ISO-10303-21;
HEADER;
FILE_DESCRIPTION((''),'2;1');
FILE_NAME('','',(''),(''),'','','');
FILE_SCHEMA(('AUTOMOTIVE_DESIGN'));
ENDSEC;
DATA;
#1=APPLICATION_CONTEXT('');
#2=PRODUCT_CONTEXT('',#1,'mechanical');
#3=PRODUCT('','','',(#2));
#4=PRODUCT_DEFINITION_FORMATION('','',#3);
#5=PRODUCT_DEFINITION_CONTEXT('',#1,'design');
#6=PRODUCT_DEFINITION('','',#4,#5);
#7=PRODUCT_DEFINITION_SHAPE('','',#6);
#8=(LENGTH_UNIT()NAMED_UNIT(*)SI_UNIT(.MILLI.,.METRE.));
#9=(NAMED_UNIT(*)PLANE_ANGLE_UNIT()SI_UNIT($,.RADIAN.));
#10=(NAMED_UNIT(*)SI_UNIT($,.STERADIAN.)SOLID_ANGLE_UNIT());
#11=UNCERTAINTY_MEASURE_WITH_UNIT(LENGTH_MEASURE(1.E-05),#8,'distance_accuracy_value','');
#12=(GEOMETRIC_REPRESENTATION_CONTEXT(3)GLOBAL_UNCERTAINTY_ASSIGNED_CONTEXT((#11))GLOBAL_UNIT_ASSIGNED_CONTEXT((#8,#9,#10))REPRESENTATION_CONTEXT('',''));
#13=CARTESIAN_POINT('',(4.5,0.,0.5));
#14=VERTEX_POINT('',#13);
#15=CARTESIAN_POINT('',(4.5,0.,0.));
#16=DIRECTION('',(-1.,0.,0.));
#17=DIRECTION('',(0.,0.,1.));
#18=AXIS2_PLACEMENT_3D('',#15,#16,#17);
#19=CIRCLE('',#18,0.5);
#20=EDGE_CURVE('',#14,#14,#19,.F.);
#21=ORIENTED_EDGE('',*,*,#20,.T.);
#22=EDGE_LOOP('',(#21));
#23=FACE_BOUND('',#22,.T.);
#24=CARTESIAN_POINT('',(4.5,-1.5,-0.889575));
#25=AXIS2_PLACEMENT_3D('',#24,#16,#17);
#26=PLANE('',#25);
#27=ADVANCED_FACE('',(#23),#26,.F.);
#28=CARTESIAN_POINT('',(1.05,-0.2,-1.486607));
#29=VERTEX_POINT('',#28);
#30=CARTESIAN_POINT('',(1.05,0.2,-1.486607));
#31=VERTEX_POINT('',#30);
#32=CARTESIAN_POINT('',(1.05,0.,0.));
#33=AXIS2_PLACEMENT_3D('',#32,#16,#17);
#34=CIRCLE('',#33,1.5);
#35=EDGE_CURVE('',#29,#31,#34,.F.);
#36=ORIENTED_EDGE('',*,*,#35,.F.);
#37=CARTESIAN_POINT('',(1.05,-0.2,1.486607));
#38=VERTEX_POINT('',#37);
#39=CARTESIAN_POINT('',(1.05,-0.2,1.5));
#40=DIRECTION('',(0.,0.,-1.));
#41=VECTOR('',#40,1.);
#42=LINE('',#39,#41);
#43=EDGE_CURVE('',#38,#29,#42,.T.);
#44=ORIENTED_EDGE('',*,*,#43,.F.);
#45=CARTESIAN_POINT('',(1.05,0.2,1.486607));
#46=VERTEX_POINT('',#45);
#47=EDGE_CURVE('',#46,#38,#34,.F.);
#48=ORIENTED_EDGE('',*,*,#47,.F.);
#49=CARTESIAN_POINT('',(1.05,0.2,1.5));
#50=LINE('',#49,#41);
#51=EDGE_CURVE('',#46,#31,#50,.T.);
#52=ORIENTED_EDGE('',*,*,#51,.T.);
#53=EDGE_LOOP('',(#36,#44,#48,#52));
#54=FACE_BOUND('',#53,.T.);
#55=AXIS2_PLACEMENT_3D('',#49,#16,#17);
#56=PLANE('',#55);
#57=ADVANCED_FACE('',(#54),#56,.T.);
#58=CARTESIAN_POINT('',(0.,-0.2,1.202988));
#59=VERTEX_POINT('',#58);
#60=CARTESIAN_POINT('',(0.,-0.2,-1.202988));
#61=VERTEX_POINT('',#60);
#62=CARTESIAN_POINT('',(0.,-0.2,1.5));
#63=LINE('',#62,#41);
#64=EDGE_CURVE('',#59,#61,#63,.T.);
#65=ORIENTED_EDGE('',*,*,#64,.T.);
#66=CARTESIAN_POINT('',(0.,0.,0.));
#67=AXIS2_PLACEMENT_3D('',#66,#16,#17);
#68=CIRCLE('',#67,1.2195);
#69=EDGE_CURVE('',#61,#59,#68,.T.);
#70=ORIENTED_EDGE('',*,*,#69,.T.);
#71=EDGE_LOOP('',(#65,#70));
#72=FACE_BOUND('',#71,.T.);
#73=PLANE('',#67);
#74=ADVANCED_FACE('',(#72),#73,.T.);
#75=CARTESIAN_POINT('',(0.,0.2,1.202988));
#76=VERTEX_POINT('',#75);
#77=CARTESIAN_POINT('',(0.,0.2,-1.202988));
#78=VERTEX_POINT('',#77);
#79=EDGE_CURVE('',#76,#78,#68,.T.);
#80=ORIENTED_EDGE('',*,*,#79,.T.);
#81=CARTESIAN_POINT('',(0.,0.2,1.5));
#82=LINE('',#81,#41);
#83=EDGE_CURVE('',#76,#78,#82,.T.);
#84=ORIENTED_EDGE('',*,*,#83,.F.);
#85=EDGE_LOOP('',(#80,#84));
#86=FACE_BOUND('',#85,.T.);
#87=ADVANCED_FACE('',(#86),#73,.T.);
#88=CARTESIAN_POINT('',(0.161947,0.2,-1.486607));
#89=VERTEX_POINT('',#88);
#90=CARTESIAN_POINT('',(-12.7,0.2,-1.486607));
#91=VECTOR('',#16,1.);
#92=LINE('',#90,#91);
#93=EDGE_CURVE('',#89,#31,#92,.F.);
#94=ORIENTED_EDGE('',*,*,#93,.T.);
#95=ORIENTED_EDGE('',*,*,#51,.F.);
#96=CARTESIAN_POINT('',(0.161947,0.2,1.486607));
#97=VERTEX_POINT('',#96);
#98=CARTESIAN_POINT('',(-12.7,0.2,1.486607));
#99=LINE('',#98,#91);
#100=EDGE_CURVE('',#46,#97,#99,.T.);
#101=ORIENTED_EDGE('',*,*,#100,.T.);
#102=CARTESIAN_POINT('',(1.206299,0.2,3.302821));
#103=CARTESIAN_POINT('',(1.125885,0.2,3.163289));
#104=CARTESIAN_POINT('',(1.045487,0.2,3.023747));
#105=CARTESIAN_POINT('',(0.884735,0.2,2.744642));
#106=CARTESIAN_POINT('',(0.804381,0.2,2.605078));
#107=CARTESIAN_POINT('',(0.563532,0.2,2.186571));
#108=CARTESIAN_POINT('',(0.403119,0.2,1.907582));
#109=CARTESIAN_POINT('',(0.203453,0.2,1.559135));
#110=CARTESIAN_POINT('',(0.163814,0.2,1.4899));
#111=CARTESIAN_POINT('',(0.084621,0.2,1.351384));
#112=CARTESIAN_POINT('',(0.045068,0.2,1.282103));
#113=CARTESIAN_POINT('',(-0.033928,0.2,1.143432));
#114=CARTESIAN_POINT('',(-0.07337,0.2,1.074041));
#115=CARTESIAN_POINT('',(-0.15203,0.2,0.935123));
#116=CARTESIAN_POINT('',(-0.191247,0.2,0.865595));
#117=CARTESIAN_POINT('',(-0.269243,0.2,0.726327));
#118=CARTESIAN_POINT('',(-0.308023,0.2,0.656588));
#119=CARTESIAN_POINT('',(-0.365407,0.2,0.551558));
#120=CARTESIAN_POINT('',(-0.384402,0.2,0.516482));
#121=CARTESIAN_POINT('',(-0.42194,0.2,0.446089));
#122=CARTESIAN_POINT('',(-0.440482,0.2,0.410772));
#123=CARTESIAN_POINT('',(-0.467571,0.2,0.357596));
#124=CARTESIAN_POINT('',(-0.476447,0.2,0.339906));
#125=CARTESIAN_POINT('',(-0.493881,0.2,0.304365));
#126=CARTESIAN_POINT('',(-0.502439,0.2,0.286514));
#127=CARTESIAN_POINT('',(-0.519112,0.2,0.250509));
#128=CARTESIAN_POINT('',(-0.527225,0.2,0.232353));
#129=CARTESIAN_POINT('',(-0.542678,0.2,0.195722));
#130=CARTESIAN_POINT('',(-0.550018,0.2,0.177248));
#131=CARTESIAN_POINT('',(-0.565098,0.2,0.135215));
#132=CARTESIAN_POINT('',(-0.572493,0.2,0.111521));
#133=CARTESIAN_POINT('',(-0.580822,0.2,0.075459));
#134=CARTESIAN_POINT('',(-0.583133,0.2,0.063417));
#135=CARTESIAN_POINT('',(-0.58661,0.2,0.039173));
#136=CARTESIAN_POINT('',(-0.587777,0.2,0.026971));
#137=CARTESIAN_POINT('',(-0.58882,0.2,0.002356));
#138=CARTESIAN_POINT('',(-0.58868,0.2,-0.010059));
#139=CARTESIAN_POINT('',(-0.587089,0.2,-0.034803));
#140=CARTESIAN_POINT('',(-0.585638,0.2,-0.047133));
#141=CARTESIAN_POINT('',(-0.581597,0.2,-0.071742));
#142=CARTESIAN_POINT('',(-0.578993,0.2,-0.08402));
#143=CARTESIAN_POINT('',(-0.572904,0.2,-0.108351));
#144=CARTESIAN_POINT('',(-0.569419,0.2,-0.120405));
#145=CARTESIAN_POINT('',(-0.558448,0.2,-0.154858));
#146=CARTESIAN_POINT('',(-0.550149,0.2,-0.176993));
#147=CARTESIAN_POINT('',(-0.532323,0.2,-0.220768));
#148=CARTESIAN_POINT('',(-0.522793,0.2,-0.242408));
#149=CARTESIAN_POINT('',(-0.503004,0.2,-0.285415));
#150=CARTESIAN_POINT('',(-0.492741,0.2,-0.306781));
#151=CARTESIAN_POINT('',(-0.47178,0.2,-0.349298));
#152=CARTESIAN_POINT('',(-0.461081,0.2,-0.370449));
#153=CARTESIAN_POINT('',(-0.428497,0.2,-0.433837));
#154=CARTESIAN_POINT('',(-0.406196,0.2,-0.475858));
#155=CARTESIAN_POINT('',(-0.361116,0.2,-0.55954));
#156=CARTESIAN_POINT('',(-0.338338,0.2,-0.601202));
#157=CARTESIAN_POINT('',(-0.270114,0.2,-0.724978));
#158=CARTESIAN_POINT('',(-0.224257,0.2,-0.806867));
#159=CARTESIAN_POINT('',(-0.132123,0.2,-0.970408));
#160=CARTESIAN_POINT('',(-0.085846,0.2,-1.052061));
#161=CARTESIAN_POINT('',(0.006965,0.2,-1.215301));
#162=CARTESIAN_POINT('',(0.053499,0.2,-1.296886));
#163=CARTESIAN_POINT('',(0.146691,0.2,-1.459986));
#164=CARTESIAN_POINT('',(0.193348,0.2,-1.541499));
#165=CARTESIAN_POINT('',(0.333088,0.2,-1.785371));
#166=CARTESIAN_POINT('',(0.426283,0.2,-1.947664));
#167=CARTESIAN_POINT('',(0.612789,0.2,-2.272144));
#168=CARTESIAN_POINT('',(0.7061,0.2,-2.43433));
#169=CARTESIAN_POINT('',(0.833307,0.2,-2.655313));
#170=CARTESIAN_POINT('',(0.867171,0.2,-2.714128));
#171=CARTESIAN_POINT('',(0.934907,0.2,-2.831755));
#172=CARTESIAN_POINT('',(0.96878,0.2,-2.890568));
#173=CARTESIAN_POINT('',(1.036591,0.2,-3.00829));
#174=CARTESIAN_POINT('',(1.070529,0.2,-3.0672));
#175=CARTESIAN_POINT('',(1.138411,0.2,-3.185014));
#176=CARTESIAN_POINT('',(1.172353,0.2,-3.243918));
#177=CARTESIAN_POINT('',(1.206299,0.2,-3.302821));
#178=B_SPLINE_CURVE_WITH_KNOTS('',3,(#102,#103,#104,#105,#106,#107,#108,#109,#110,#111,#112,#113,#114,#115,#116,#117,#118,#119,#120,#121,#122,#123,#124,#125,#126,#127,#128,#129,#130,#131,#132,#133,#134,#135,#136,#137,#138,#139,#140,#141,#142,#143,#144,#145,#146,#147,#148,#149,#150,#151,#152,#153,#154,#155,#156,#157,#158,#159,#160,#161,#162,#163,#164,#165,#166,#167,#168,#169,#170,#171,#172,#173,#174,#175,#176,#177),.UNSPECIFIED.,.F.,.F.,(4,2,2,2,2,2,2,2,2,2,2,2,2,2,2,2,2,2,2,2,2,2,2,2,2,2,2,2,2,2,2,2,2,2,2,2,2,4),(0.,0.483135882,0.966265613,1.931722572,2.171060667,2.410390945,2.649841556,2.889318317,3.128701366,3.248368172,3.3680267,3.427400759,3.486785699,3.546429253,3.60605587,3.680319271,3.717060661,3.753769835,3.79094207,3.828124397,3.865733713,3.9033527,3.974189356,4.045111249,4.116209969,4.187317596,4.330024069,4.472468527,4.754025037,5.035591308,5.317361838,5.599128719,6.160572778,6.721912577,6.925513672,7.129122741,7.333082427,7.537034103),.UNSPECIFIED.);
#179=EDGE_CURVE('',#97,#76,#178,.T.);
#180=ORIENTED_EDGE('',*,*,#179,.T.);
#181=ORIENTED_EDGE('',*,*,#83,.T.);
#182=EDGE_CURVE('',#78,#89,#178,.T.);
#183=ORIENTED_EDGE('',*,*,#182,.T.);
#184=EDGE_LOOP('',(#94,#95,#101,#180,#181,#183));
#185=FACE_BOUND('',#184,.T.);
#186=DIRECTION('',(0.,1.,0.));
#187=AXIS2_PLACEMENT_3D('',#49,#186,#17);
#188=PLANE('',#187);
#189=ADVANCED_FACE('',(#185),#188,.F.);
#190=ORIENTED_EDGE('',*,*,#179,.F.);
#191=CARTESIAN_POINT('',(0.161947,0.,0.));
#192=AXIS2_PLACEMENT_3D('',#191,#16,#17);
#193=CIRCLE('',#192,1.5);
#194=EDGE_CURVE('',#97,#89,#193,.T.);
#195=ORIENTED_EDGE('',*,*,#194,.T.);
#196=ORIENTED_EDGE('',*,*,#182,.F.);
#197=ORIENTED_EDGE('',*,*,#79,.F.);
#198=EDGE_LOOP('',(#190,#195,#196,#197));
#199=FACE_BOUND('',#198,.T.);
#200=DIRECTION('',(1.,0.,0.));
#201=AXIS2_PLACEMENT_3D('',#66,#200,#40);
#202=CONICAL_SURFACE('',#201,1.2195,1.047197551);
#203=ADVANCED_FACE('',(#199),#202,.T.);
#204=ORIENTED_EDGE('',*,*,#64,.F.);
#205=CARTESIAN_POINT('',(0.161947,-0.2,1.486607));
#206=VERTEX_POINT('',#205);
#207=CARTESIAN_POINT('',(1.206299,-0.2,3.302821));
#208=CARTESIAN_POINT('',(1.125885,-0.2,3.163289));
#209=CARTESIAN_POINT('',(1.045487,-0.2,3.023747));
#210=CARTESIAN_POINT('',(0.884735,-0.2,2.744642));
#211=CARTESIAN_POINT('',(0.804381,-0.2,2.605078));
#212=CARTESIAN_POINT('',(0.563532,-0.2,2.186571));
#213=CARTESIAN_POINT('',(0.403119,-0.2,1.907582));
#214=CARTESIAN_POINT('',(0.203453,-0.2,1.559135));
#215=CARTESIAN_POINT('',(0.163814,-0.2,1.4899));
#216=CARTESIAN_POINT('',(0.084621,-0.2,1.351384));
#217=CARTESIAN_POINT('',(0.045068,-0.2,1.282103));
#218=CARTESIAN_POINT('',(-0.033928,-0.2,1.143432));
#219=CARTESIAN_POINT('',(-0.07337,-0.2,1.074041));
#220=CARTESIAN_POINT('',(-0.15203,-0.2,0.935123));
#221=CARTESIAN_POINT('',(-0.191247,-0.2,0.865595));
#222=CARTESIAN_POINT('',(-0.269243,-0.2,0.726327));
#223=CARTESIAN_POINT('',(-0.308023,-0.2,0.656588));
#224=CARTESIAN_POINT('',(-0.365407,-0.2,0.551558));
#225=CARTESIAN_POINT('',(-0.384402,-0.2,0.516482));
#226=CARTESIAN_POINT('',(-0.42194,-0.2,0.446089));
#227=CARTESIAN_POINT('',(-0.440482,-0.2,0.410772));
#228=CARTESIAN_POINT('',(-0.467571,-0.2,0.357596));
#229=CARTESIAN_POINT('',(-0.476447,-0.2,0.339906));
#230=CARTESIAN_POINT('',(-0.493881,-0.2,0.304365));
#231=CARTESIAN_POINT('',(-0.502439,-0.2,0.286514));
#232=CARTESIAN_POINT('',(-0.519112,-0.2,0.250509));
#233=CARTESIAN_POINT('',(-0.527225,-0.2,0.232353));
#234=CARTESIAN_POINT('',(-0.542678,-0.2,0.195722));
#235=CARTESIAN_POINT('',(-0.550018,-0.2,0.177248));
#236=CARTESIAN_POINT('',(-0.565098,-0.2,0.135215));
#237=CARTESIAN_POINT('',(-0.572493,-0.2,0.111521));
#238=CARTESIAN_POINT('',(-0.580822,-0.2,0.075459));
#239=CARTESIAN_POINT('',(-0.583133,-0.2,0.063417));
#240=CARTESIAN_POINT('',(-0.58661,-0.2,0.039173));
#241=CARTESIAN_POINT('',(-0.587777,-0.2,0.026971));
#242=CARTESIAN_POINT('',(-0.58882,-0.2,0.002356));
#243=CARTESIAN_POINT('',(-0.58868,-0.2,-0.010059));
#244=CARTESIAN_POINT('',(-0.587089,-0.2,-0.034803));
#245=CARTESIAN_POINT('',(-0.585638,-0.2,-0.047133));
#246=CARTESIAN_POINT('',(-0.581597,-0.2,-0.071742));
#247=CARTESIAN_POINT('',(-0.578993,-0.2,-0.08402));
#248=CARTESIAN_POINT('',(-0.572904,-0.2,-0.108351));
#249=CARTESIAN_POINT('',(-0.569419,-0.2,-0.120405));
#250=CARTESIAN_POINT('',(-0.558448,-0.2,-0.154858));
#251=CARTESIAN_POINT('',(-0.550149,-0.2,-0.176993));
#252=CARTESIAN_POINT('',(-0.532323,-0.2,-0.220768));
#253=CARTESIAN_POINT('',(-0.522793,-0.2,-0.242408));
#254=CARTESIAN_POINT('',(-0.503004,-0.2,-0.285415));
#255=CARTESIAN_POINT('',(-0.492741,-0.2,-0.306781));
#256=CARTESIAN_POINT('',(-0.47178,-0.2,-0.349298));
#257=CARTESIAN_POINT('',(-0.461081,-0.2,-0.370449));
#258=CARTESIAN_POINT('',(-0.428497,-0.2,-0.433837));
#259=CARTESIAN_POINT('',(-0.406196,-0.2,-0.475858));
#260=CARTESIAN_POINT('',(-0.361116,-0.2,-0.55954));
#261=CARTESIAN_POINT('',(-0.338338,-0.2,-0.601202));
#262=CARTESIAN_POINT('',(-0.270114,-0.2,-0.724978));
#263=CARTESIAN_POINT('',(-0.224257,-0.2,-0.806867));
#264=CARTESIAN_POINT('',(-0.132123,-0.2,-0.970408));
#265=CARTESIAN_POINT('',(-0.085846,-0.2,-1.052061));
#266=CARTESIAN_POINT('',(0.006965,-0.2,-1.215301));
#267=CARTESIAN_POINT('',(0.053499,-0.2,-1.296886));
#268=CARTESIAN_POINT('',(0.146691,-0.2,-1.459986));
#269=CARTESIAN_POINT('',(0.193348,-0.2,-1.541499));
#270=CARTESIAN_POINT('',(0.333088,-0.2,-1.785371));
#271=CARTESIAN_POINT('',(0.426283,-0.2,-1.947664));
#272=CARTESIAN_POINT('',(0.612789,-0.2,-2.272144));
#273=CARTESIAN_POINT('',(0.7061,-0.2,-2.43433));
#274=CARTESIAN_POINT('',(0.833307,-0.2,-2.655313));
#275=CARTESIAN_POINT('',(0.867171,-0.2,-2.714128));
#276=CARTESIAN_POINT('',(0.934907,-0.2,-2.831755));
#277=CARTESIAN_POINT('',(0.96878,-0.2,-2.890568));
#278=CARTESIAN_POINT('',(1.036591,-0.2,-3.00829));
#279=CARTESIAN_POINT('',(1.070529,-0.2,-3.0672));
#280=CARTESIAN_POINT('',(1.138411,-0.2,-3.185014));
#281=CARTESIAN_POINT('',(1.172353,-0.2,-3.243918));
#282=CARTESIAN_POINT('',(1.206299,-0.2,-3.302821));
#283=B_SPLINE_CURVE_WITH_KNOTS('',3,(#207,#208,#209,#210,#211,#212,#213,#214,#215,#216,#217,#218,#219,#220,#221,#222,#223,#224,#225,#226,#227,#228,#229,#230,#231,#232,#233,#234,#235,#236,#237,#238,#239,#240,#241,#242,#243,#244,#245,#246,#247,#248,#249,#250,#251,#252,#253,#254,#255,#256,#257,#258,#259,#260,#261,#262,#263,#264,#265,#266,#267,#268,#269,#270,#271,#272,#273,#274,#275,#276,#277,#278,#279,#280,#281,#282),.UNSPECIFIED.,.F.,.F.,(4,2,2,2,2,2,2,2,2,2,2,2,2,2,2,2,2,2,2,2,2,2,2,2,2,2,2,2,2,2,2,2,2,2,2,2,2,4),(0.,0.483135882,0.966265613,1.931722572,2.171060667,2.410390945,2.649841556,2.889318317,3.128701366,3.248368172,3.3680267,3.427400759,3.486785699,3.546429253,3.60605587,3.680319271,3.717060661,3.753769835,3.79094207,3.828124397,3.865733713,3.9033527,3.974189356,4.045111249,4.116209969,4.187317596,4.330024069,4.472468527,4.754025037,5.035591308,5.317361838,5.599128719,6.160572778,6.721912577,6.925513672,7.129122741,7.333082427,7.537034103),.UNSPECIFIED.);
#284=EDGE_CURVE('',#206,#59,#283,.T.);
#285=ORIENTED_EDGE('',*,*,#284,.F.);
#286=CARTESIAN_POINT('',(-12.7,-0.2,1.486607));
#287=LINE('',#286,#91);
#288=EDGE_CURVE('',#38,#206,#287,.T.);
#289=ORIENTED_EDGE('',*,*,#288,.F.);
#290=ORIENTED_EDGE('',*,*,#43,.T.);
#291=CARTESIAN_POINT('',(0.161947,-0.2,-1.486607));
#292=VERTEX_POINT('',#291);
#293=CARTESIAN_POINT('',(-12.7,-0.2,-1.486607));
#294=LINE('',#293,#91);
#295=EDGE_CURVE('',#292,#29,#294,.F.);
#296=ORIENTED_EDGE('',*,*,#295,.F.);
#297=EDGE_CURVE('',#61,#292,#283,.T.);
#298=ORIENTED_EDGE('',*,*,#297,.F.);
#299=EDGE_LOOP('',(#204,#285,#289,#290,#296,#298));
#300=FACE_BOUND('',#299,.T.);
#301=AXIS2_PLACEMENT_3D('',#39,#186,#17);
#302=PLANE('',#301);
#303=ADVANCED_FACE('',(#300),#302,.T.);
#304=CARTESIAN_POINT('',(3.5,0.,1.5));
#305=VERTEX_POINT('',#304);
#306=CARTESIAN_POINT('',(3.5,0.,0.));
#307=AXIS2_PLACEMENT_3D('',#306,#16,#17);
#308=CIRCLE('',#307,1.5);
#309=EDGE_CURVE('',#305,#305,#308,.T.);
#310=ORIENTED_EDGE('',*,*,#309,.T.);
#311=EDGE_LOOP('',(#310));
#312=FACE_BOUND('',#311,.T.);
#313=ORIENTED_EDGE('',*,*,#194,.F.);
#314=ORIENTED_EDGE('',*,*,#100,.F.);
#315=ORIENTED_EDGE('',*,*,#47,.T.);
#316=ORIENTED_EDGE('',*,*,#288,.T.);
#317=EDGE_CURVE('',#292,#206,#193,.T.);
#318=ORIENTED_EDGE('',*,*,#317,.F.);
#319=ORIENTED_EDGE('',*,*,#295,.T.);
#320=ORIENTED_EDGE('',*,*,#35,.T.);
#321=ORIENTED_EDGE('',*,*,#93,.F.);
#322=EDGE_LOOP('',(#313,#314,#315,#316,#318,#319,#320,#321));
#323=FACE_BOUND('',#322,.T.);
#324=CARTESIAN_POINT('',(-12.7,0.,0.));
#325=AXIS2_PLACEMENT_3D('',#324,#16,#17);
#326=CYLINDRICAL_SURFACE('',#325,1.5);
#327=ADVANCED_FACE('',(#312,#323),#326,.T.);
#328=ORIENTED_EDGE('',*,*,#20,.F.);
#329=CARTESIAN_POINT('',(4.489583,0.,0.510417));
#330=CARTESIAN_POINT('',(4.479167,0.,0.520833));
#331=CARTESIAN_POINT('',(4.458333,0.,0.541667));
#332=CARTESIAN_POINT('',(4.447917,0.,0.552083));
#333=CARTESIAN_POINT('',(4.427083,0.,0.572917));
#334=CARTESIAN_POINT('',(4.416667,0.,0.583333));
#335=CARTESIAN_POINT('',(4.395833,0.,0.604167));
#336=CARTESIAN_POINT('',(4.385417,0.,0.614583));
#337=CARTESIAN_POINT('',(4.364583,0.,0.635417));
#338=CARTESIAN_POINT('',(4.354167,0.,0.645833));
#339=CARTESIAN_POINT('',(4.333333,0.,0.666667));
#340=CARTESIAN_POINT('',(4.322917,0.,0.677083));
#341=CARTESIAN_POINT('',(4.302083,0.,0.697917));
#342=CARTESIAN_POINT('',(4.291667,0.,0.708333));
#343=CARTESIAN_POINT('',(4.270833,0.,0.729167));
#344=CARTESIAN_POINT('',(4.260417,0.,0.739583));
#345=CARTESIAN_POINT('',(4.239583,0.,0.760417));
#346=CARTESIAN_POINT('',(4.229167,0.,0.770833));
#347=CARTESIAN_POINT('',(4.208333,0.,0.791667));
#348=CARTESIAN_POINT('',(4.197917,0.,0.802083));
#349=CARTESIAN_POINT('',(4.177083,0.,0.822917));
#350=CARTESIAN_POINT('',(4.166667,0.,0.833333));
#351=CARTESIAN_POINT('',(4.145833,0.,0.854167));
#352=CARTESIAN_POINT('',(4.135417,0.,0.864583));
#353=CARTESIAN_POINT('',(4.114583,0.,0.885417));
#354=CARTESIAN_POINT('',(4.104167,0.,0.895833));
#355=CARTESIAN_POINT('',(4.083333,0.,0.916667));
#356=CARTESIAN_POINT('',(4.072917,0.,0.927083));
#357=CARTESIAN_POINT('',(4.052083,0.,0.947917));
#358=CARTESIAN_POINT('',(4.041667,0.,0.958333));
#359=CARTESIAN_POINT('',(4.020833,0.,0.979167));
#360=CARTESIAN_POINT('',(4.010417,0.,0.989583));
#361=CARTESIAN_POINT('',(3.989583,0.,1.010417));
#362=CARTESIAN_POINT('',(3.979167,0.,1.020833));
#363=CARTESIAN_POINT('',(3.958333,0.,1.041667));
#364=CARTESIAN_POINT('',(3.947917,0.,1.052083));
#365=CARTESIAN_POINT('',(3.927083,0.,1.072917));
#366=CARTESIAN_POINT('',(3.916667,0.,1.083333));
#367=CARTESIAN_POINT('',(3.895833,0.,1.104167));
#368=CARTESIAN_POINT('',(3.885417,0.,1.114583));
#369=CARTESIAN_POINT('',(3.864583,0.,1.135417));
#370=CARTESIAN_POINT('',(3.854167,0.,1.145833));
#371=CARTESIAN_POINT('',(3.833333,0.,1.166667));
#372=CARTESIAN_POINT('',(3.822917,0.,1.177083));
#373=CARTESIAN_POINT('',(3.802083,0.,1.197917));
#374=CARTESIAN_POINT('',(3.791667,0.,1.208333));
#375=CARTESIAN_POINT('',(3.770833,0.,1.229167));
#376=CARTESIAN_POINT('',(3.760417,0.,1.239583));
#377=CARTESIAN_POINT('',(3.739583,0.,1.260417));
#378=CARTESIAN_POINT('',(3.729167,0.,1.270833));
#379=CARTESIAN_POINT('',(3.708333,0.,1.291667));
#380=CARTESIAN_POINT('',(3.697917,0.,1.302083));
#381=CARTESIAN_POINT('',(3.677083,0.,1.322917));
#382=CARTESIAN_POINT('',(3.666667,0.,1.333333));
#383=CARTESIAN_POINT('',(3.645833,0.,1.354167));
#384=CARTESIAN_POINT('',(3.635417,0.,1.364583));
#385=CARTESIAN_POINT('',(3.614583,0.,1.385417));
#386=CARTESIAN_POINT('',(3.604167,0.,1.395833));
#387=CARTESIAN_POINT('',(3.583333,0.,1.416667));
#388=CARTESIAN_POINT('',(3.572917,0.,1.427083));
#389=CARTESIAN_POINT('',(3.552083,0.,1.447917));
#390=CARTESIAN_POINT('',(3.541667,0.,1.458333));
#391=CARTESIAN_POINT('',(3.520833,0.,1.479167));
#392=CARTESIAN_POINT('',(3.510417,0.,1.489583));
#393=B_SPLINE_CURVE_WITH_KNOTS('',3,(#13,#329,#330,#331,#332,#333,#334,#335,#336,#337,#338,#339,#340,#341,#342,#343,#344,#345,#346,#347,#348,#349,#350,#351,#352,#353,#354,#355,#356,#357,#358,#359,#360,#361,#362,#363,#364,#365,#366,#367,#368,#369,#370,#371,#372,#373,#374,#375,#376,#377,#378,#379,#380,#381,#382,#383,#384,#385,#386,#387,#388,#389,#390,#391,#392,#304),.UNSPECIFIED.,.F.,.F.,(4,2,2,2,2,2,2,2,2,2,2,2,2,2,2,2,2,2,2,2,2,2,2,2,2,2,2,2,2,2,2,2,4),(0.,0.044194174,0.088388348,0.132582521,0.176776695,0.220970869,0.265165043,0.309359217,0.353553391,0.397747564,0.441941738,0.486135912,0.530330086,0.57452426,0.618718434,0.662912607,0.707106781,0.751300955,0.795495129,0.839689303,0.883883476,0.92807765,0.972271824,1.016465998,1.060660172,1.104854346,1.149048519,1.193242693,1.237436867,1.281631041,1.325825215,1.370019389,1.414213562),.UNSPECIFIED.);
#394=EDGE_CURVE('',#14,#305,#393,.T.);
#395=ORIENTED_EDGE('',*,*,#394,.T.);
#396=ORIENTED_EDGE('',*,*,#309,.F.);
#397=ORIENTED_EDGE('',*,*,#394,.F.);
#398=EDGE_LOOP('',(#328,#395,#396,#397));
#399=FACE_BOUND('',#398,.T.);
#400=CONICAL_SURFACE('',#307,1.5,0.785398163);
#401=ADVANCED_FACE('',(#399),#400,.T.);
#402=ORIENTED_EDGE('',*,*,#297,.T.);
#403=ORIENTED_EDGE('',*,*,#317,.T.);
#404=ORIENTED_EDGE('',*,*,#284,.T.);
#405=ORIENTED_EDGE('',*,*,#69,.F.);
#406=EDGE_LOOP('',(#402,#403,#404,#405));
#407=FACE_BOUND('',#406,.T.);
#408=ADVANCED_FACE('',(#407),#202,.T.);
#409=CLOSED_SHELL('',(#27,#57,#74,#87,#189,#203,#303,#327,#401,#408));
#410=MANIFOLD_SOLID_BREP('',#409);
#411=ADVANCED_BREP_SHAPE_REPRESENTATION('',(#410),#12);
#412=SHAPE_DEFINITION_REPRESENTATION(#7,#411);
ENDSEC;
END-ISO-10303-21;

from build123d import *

# Parameters (mm, degrees)
BASEBODY_DEPTH               = 5.0000001
BASEBODY_START               = 1.05
BASEBODY_2_DEPTH             = 3.9500001
ENL_V_MAT_EXTRU_1_DEPTH      = 6.431390246
ENL_V_MAT_EXTRU_1_DEPTH_BACK = 6.431390246
ESQUISSE1_W                  = 0.922934363
ESQUISSE1_H                  = 1.901467182


with BuildPart() as part:
    # BaseBody: read off the stored shape, not the designer's step
    # BaseBody outline → BaseBody (new body)
    with BuildSketch(Plane.YZ):
        with BuildLine():
            ThreePointArc((0.2, -1.486606875), (1.5, 0), (0.2, 1.486606875))
            Line((0.2, 1.486606875), (0.2, -1.486606875))
        make_face()
        with BuildLine():
            Line((-0.2, -1.486606875), (-0.2, 1.486606875))
            ThreePointArc((-0.2, 1.486606875), (-1.5, 0), (-0.2, -1.486606875))
        make_face()
    extrude(amount=BASEBODY_DEPTH)

    # BaseBody 2 outline → BaseBody 2 (add)
    with BuildSketch(Plane.YZ.offset(BASEBODY_START)):
        with BuildLine():
            Line((0.2, -1.486606875), (0.2, 1.486606875))
            ThreePointArc((0.2, 1.486606875), (0, 1.5), (-0.2, 1.486606875))
            Line((-0.2, 1.486606875), (-0.2, -1.486606875))
            ThreePointArc((-0.2, -1.486606875), (0, -1.5), (0.2, -1.486606875))
        make_face()
    extrude(amount=BASEBODY_2_DEPTH)

    # BaseBody 3 outline → BaseBody 3 (revolve, cut)
    with BuildSketch(Plane.YX):
        Polygon((1.500000003, 0.161946752), (1.21949999, -6e-09), (1.500000003, -6e-09), align=None)
        Polygon((0, 5), (1.5, 3.5), (1.500000003, 5.0000001), align=None)
    revolve(axis=Axis((0, 0, 0), (1, 0, 0)), mode=Mode.SUBTRACT)

    # Esquisse1 → Enlèv. mat.-Extru.1 (cut, two sides: drawn at the far end of the back side and taken through both)
    with BuildSketch(Plane(origin=(0, 0, 0), x_dir=(1, 0, 0), z_dir=(0, 1, 0)).offset(-ENL_V_MAT_EXTRU_1_DEPTH_BACK)):
        with Locations((4.961467181, -0.061158301)):
            Rectangle(ESQUISSE1_W, ESQUISSE1_H)
    extrude(amount=ENL_V_MAT_EXTRU_1_DEPTH + ENL_V_MAT_EXTRU_1_DEPTH_BACK, mode=Mode.SUBTRACT)


solid = part.part
